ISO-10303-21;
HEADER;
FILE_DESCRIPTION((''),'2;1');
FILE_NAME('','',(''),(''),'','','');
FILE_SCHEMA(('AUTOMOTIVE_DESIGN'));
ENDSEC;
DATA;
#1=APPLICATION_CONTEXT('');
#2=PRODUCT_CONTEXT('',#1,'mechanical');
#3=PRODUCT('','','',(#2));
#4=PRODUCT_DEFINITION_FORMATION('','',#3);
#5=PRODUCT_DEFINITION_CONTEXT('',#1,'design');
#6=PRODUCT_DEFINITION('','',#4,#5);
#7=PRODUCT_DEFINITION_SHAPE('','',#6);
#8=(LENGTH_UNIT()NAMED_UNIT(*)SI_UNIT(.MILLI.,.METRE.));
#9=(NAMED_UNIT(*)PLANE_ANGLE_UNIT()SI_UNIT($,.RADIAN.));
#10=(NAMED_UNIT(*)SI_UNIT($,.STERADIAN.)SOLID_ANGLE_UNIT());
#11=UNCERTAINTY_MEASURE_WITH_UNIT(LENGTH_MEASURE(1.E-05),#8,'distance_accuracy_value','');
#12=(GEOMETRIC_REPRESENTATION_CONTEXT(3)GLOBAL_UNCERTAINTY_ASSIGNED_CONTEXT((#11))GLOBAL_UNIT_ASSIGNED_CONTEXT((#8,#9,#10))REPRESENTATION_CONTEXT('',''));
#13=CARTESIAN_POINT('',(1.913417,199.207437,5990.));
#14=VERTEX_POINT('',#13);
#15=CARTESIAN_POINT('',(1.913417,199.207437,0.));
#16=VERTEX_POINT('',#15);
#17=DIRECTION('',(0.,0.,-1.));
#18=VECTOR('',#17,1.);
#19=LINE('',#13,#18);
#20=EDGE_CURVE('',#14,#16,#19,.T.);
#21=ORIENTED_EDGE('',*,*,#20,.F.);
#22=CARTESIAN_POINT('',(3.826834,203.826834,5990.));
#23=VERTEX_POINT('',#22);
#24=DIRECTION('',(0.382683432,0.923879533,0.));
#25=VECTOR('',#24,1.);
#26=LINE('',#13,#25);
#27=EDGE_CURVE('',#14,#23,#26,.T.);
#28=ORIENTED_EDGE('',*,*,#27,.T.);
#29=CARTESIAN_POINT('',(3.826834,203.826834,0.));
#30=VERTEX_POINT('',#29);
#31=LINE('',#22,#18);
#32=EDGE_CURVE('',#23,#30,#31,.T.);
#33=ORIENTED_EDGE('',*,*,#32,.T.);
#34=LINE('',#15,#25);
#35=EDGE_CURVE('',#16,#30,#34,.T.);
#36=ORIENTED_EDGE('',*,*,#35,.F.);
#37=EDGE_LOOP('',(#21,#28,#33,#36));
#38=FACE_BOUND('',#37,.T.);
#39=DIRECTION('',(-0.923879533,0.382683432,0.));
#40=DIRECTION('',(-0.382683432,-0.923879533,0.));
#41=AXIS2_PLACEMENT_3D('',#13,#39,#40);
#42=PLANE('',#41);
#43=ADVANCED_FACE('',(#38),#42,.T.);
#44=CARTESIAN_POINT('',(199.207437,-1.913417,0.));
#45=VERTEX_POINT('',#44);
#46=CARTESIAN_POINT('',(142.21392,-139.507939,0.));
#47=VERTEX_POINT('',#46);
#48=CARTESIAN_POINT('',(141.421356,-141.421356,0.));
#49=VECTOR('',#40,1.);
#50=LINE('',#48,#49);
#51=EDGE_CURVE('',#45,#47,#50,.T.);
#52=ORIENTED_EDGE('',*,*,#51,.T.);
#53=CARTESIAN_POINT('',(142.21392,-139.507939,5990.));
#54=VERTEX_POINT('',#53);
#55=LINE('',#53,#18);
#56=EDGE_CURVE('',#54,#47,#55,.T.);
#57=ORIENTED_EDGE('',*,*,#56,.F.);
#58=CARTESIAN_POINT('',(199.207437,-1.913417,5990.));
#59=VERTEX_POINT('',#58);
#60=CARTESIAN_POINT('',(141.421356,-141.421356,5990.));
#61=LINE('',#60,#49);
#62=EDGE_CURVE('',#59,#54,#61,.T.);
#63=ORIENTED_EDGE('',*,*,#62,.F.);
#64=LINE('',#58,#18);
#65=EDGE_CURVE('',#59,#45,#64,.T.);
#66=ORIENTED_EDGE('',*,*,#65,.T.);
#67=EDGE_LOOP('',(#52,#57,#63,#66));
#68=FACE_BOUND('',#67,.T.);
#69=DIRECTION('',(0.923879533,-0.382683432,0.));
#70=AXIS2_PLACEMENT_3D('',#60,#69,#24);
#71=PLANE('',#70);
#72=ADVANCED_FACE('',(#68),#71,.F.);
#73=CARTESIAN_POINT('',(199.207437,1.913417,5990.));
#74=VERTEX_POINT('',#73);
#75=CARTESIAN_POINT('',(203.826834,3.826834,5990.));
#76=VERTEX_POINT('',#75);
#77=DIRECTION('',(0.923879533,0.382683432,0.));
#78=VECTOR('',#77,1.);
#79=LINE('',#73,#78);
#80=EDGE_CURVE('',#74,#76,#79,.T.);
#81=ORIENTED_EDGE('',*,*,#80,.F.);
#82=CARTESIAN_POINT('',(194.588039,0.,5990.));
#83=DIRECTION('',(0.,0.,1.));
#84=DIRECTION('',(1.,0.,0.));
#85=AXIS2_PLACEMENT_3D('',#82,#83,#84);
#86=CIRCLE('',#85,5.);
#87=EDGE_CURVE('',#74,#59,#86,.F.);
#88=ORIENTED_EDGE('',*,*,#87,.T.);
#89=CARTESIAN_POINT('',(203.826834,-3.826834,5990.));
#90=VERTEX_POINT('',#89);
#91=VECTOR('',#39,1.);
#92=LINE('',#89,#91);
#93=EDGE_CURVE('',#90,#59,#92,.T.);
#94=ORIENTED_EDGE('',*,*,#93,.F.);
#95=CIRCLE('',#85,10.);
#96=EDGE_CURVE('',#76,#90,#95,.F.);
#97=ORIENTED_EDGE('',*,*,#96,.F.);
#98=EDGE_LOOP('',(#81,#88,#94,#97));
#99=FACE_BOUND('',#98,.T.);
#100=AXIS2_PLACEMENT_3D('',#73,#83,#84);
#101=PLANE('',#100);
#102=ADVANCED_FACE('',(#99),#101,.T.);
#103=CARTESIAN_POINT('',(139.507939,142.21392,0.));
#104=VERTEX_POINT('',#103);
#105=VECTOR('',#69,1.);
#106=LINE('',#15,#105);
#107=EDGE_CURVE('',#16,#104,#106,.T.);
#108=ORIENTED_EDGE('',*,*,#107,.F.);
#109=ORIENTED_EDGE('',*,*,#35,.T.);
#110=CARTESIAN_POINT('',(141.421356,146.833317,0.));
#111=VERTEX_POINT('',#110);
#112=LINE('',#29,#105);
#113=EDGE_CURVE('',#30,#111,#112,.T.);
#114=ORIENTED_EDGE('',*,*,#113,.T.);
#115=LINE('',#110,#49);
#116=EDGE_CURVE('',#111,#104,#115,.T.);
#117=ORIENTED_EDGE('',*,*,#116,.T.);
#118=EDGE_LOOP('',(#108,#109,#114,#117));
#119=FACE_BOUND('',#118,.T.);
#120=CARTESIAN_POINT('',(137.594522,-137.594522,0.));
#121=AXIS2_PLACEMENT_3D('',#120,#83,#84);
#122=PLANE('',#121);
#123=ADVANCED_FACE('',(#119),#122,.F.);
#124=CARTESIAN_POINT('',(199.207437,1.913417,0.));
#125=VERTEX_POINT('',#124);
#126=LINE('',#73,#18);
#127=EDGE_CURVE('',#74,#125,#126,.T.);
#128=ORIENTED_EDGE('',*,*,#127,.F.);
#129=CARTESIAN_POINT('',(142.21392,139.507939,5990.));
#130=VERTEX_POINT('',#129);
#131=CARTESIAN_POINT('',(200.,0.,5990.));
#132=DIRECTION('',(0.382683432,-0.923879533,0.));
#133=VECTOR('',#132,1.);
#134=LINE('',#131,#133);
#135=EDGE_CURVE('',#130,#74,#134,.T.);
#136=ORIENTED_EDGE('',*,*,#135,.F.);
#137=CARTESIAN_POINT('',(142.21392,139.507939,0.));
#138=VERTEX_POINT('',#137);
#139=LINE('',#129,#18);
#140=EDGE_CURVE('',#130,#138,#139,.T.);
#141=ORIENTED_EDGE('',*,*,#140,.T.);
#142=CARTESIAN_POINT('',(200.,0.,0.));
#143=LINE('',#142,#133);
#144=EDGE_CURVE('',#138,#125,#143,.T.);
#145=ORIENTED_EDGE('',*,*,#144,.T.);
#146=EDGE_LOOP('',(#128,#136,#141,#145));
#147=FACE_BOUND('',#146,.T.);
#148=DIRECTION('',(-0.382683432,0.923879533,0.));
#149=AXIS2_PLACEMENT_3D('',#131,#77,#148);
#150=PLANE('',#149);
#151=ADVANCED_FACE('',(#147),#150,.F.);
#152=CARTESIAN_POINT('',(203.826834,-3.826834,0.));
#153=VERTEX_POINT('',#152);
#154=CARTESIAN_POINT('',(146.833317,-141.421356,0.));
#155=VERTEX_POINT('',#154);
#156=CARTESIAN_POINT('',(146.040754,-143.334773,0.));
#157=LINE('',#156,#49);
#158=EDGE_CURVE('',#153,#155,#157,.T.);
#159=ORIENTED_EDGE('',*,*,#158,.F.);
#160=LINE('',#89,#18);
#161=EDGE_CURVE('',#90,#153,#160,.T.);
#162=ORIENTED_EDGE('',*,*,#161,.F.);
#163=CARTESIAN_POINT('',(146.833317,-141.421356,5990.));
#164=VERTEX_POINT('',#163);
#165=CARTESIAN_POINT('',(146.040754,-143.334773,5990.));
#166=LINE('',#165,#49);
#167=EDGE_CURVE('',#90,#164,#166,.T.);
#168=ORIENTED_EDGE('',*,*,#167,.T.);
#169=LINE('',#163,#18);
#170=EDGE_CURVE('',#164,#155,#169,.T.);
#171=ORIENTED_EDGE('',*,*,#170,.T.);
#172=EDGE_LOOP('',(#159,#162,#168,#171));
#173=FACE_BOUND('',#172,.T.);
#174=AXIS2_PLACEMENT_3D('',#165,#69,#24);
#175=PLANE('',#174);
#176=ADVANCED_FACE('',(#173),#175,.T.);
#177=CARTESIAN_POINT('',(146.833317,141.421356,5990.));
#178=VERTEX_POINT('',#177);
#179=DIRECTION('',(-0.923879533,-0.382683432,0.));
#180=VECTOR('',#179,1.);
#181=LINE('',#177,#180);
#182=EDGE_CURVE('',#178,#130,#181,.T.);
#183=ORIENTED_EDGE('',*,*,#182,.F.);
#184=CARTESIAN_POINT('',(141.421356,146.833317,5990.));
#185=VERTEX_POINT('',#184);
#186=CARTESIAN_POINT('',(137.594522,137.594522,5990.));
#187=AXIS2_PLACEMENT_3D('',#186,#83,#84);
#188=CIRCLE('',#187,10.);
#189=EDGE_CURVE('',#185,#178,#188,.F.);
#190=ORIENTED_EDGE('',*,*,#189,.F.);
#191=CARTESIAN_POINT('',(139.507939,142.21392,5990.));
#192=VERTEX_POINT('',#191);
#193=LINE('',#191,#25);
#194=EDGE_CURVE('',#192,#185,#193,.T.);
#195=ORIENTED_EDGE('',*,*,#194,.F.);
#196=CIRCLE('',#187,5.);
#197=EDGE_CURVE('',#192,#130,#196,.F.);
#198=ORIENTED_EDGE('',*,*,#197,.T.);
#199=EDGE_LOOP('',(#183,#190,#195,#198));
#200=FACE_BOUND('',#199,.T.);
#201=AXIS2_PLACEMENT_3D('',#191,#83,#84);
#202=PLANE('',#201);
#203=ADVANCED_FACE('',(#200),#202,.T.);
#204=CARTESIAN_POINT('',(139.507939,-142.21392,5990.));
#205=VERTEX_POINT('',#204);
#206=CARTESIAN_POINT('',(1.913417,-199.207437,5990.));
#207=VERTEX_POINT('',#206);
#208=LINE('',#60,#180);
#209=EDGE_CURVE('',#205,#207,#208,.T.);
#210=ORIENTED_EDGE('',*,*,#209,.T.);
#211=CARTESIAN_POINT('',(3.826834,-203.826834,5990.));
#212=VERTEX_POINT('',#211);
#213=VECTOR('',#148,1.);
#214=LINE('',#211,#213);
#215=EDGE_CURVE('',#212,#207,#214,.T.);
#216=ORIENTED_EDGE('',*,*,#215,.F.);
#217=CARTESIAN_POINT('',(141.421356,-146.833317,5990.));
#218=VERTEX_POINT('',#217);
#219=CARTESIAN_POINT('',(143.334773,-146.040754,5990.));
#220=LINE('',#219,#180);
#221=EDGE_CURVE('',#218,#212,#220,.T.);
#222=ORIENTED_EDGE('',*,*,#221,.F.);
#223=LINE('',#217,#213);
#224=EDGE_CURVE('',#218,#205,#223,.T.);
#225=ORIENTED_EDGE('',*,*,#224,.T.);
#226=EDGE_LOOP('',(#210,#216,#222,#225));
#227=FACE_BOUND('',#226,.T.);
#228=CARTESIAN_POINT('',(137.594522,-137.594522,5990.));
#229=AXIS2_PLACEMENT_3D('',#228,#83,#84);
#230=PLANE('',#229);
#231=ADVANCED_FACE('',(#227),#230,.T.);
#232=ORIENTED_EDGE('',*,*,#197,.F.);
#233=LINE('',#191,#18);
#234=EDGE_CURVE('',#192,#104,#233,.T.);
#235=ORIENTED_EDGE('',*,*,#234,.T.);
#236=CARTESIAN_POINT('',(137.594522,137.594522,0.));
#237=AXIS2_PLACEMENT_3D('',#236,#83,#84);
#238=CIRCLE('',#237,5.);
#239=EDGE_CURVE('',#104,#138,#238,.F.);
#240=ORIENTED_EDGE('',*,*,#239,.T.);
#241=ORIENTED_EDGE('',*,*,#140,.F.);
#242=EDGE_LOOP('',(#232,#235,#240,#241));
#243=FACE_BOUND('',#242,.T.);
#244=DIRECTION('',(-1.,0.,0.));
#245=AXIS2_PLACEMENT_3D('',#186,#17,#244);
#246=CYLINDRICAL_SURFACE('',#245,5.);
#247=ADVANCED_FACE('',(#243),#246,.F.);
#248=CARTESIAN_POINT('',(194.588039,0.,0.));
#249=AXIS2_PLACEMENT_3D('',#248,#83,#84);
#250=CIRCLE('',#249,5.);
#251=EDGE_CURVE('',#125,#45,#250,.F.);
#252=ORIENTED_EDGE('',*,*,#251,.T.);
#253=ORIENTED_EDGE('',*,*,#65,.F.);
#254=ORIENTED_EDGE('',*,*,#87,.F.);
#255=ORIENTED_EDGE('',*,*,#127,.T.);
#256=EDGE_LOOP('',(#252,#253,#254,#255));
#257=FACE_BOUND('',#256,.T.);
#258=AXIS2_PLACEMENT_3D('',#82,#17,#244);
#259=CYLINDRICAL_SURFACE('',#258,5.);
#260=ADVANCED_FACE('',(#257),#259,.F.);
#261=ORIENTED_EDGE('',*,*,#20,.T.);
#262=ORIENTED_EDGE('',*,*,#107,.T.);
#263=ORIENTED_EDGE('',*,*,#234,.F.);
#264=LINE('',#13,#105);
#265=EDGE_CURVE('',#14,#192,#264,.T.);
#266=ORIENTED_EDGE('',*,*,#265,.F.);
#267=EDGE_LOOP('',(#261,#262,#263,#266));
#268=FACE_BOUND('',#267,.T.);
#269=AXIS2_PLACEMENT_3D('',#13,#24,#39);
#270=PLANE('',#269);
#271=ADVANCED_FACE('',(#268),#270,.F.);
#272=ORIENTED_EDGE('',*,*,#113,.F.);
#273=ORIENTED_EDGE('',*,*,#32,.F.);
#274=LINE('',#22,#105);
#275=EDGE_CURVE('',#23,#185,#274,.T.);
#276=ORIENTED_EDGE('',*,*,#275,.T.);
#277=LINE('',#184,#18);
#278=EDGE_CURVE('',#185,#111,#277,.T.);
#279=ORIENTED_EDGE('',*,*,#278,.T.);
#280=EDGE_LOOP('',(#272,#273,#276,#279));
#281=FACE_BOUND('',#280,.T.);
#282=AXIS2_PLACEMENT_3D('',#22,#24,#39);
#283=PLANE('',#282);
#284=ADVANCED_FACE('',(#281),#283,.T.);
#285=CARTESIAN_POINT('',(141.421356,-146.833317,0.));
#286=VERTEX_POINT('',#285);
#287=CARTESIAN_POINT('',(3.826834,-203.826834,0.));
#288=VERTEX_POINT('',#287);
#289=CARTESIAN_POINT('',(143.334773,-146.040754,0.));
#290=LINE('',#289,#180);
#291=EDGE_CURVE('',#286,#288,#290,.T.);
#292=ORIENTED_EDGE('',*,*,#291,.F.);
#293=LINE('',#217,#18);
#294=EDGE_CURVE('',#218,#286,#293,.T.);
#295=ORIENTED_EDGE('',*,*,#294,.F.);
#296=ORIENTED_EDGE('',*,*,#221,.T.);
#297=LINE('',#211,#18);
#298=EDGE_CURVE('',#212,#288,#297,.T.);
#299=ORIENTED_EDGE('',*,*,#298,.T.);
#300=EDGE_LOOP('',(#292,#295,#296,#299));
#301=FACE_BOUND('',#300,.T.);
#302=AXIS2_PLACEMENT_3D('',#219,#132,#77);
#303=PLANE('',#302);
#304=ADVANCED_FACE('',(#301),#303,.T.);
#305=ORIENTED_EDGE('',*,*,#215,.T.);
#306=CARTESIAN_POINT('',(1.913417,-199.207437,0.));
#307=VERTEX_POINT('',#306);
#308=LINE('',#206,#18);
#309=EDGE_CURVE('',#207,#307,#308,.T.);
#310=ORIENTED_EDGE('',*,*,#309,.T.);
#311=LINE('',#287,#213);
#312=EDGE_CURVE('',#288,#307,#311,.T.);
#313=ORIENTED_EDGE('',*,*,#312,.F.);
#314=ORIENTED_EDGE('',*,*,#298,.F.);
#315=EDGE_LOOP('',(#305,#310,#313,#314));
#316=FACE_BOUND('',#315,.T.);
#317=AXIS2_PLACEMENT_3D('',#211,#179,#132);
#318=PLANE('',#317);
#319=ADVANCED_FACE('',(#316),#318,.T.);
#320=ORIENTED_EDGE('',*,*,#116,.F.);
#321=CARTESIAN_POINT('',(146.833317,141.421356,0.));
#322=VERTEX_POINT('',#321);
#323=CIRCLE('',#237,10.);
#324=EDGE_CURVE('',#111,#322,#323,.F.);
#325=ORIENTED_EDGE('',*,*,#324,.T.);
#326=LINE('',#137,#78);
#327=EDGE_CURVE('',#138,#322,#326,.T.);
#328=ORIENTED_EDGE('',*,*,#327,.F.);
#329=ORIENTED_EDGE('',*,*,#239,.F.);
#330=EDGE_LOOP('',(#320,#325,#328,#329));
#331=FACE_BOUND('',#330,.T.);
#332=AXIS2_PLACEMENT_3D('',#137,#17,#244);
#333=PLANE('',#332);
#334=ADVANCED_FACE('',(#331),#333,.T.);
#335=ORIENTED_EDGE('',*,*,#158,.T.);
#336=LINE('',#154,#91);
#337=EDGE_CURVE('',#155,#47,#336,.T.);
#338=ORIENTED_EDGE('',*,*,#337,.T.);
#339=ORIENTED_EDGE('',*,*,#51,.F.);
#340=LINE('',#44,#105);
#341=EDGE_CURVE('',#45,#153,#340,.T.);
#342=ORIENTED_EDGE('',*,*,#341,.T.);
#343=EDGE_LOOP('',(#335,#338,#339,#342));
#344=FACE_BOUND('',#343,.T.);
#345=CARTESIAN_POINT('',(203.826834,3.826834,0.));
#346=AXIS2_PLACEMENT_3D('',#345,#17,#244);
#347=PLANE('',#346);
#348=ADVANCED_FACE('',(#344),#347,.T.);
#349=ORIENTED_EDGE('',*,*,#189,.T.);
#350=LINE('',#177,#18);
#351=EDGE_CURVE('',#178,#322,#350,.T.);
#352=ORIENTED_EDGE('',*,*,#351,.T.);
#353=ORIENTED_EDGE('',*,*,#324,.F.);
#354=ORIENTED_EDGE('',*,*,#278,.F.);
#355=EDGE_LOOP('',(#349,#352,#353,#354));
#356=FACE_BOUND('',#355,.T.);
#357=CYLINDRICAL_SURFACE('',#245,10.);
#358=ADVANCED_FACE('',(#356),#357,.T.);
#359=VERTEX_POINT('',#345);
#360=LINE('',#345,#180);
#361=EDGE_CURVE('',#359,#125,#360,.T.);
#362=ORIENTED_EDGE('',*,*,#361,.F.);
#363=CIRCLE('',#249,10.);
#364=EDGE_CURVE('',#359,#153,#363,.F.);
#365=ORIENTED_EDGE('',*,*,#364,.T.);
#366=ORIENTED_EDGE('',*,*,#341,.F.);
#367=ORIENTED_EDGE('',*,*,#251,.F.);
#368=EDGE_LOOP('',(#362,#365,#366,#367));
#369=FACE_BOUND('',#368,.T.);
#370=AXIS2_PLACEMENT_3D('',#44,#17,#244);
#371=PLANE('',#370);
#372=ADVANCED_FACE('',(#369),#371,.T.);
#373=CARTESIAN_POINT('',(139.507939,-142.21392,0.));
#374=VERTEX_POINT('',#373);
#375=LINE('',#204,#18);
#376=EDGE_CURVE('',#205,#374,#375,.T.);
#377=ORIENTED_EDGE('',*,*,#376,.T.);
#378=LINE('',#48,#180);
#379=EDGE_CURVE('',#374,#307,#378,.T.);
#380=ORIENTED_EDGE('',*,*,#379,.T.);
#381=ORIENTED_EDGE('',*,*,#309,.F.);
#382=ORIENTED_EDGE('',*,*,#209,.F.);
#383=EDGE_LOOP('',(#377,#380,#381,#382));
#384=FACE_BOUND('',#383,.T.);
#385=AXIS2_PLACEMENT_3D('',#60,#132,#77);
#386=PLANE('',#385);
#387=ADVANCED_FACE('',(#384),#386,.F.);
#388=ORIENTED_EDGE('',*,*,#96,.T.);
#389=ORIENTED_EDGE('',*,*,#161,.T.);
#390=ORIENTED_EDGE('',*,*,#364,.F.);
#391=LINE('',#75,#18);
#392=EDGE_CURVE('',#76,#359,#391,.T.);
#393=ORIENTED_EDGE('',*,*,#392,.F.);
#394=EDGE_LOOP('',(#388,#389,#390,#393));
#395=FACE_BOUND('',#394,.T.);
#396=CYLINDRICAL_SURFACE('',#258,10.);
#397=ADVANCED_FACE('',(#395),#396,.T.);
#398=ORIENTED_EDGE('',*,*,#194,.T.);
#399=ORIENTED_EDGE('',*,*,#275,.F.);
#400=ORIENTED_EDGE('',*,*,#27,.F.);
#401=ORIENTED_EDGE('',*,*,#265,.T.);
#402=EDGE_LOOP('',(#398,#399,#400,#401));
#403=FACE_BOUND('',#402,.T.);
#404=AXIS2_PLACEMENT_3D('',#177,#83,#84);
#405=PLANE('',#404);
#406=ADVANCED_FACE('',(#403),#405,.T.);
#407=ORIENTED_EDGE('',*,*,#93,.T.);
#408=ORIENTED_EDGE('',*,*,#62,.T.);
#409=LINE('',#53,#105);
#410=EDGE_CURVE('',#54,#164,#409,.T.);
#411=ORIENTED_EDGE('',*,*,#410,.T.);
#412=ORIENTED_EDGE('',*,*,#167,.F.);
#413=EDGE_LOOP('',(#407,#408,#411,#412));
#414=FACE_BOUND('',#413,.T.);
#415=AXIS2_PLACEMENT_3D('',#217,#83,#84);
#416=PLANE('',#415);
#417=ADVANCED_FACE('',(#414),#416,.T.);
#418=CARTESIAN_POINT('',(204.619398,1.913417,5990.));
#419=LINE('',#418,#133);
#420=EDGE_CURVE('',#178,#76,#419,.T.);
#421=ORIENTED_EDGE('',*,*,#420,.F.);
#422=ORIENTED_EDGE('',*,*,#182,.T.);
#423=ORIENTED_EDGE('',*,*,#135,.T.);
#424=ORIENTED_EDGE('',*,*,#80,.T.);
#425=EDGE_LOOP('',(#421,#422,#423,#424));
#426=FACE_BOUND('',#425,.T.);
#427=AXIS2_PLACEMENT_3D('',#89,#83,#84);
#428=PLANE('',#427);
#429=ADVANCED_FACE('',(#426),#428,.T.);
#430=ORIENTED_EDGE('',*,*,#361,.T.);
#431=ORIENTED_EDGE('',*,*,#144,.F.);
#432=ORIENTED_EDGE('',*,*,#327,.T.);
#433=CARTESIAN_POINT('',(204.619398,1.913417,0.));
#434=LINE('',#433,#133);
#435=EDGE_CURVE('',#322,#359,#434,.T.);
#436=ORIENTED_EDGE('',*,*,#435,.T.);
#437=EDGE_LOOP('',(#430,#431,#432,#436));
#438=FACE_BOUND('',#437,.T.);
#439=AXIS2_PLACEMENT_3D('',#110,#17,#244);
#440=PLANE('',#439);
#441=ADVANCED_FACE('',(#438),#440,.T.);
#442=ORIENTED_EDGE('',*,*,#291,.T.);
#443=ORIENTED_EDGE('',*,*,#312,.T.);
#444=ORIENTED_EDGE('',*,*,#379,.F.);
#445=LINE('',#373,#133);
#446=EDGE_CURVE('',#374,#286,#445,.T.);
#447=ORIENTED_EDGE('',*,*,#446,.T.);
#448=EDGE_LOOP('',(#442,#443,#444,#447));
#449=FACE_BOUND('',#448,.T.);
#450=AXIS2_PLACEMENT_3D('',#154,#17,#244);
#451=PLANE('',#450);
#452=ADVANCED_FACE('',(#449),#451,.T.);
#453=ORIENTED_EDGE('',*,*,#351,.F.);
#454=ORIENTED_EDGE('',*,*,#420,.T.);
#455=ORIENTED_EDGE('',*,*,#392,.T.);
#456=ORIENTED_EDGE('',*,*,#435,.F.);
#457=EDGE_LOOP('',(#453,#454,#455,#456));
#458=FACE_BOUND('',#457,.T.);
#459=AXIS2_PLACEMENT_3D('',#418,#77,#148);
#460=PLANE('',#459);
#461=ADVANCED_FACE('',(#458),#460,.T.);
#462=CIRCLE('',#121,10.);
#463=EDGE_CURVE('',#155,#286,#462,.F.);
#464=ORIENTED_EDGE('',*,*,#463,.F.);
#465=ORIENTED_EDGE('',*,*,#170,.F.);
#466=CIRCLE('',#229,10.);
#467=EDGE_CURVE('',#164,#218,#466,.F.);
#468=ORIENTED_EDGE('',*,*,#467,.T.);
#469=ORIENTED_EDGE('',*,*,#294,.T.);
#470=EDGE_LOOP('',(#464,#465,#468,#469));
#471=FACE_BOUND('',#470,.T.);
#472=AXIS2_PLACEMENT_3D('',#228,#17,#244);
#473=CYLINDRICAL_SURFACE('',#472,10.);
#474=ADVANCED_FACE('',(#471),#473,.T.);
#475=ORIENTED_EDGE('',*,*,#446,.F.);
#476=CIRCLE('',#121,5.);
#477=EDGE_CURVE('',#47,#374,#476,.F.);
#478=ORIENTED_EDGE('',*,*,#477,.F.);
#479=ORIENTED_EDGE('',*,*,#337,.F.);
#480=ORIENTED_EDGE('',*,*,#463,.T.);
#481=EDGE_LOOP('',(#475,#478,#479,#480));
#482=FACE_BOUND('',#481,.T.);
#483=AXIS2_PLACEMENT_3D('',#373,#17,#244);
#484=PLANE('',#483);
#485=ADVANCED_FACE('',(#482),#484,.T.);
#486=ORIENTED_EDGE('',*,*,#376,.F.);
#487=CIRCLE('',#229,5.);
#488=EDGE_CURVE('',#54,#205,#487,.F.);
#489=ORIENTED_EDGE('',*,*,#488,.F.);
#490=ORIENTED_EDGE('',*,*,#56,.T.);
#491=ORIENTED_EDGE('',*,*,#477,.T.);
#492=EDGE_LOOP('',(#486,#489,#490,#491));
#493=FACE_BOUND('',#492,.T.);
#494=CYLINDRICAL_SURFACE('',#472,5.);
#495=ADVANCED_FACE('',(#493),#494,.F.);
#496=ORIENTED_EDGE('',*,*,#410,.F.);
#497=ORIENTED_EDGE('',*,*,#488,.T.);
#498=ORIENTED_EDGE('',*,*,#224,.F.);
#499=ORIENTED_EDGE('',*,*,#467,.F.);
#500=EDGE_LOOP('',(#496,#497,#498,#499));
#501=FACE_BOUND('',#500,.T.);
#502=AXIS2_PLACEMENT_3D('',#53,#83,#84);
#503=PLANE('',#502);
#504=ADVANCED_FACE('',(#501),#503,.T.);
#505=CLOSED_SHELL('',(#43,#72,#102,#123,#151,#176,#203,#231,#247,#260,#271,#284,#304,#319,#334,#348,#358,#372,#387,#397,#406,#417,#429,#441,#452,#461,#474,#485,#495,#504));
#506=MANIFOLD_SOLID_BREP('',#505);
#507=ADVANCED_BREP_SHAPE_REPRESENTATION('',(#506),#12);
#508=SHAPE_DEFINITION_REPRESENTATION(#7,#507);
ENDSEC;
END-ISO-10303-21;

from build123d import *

# Parameters (mm, degrees)
TABAN_FLAN_1_DEPTH = 5990


# Sheet-metal steps are written as plain solids
with BuildPart() as part:
    # Çizim1 → Taban-Flanş1 (new body)
    with BuildSketch(Plane.XY):
        with BuildLine():
            Line((1.913417162, -199.207436661), (139.507939075, -142.213919576))
            ThreePointArc((139.507939075, -142.213919576), (141.13005582, -141.13005582), (142.213919576, -139.507939075))
            Line((142.213919576, -139.507939075), (199.207436661, -1.913417162))
            ThreePointArc((199.207436661, -1.913417162), (199.588038999, 0), (199.207436661, 1.913417162))
            Line((199.207436661, 1.913417162), (142.213919576, 139.507939075))
            ThreePointArc((142.213919576, 139.507939075), (141.13005582, 141.13005582), (139.507939075, 142.213919576))
            Line((139.507939075, 142.213919576), (1.913417162, 199.207436661))
            Line((1.913417162, 199.207436661), (3.826834324, 203.826834324))
            Line((3.826834324, 203.826834324), (141.421356237, 146.833317239))
            ThreePointArc((141.421356237, 146.833317239), (144.665589726, 144.665589726), (146.833317239, 141.421356237))
            Line((146.833317239, 141.421356237), (203.826834324, 3.826834324))
            ThreePointArc((203.826834324, 3.826834324), (204.588038999, 0), (203.826834324, -3.826834324))
            Line((203.826834324, -3.826834324), (146.833317239, -141.421356237))
            ThreePointArc((146.833317239, -141.421356237), (144.665589726, -144.665589726), (141.421356237, -146.833317239))
            Line((141.421356237, -146.833317239), (3.826834324, -203.826834324))
            Line((3.826834324, -203.826834324), (1.913417162, -199.207436661))
        make_face()
    extrude(amount=TABAN_FLAN_1_DEPTH)


solid = part.part
